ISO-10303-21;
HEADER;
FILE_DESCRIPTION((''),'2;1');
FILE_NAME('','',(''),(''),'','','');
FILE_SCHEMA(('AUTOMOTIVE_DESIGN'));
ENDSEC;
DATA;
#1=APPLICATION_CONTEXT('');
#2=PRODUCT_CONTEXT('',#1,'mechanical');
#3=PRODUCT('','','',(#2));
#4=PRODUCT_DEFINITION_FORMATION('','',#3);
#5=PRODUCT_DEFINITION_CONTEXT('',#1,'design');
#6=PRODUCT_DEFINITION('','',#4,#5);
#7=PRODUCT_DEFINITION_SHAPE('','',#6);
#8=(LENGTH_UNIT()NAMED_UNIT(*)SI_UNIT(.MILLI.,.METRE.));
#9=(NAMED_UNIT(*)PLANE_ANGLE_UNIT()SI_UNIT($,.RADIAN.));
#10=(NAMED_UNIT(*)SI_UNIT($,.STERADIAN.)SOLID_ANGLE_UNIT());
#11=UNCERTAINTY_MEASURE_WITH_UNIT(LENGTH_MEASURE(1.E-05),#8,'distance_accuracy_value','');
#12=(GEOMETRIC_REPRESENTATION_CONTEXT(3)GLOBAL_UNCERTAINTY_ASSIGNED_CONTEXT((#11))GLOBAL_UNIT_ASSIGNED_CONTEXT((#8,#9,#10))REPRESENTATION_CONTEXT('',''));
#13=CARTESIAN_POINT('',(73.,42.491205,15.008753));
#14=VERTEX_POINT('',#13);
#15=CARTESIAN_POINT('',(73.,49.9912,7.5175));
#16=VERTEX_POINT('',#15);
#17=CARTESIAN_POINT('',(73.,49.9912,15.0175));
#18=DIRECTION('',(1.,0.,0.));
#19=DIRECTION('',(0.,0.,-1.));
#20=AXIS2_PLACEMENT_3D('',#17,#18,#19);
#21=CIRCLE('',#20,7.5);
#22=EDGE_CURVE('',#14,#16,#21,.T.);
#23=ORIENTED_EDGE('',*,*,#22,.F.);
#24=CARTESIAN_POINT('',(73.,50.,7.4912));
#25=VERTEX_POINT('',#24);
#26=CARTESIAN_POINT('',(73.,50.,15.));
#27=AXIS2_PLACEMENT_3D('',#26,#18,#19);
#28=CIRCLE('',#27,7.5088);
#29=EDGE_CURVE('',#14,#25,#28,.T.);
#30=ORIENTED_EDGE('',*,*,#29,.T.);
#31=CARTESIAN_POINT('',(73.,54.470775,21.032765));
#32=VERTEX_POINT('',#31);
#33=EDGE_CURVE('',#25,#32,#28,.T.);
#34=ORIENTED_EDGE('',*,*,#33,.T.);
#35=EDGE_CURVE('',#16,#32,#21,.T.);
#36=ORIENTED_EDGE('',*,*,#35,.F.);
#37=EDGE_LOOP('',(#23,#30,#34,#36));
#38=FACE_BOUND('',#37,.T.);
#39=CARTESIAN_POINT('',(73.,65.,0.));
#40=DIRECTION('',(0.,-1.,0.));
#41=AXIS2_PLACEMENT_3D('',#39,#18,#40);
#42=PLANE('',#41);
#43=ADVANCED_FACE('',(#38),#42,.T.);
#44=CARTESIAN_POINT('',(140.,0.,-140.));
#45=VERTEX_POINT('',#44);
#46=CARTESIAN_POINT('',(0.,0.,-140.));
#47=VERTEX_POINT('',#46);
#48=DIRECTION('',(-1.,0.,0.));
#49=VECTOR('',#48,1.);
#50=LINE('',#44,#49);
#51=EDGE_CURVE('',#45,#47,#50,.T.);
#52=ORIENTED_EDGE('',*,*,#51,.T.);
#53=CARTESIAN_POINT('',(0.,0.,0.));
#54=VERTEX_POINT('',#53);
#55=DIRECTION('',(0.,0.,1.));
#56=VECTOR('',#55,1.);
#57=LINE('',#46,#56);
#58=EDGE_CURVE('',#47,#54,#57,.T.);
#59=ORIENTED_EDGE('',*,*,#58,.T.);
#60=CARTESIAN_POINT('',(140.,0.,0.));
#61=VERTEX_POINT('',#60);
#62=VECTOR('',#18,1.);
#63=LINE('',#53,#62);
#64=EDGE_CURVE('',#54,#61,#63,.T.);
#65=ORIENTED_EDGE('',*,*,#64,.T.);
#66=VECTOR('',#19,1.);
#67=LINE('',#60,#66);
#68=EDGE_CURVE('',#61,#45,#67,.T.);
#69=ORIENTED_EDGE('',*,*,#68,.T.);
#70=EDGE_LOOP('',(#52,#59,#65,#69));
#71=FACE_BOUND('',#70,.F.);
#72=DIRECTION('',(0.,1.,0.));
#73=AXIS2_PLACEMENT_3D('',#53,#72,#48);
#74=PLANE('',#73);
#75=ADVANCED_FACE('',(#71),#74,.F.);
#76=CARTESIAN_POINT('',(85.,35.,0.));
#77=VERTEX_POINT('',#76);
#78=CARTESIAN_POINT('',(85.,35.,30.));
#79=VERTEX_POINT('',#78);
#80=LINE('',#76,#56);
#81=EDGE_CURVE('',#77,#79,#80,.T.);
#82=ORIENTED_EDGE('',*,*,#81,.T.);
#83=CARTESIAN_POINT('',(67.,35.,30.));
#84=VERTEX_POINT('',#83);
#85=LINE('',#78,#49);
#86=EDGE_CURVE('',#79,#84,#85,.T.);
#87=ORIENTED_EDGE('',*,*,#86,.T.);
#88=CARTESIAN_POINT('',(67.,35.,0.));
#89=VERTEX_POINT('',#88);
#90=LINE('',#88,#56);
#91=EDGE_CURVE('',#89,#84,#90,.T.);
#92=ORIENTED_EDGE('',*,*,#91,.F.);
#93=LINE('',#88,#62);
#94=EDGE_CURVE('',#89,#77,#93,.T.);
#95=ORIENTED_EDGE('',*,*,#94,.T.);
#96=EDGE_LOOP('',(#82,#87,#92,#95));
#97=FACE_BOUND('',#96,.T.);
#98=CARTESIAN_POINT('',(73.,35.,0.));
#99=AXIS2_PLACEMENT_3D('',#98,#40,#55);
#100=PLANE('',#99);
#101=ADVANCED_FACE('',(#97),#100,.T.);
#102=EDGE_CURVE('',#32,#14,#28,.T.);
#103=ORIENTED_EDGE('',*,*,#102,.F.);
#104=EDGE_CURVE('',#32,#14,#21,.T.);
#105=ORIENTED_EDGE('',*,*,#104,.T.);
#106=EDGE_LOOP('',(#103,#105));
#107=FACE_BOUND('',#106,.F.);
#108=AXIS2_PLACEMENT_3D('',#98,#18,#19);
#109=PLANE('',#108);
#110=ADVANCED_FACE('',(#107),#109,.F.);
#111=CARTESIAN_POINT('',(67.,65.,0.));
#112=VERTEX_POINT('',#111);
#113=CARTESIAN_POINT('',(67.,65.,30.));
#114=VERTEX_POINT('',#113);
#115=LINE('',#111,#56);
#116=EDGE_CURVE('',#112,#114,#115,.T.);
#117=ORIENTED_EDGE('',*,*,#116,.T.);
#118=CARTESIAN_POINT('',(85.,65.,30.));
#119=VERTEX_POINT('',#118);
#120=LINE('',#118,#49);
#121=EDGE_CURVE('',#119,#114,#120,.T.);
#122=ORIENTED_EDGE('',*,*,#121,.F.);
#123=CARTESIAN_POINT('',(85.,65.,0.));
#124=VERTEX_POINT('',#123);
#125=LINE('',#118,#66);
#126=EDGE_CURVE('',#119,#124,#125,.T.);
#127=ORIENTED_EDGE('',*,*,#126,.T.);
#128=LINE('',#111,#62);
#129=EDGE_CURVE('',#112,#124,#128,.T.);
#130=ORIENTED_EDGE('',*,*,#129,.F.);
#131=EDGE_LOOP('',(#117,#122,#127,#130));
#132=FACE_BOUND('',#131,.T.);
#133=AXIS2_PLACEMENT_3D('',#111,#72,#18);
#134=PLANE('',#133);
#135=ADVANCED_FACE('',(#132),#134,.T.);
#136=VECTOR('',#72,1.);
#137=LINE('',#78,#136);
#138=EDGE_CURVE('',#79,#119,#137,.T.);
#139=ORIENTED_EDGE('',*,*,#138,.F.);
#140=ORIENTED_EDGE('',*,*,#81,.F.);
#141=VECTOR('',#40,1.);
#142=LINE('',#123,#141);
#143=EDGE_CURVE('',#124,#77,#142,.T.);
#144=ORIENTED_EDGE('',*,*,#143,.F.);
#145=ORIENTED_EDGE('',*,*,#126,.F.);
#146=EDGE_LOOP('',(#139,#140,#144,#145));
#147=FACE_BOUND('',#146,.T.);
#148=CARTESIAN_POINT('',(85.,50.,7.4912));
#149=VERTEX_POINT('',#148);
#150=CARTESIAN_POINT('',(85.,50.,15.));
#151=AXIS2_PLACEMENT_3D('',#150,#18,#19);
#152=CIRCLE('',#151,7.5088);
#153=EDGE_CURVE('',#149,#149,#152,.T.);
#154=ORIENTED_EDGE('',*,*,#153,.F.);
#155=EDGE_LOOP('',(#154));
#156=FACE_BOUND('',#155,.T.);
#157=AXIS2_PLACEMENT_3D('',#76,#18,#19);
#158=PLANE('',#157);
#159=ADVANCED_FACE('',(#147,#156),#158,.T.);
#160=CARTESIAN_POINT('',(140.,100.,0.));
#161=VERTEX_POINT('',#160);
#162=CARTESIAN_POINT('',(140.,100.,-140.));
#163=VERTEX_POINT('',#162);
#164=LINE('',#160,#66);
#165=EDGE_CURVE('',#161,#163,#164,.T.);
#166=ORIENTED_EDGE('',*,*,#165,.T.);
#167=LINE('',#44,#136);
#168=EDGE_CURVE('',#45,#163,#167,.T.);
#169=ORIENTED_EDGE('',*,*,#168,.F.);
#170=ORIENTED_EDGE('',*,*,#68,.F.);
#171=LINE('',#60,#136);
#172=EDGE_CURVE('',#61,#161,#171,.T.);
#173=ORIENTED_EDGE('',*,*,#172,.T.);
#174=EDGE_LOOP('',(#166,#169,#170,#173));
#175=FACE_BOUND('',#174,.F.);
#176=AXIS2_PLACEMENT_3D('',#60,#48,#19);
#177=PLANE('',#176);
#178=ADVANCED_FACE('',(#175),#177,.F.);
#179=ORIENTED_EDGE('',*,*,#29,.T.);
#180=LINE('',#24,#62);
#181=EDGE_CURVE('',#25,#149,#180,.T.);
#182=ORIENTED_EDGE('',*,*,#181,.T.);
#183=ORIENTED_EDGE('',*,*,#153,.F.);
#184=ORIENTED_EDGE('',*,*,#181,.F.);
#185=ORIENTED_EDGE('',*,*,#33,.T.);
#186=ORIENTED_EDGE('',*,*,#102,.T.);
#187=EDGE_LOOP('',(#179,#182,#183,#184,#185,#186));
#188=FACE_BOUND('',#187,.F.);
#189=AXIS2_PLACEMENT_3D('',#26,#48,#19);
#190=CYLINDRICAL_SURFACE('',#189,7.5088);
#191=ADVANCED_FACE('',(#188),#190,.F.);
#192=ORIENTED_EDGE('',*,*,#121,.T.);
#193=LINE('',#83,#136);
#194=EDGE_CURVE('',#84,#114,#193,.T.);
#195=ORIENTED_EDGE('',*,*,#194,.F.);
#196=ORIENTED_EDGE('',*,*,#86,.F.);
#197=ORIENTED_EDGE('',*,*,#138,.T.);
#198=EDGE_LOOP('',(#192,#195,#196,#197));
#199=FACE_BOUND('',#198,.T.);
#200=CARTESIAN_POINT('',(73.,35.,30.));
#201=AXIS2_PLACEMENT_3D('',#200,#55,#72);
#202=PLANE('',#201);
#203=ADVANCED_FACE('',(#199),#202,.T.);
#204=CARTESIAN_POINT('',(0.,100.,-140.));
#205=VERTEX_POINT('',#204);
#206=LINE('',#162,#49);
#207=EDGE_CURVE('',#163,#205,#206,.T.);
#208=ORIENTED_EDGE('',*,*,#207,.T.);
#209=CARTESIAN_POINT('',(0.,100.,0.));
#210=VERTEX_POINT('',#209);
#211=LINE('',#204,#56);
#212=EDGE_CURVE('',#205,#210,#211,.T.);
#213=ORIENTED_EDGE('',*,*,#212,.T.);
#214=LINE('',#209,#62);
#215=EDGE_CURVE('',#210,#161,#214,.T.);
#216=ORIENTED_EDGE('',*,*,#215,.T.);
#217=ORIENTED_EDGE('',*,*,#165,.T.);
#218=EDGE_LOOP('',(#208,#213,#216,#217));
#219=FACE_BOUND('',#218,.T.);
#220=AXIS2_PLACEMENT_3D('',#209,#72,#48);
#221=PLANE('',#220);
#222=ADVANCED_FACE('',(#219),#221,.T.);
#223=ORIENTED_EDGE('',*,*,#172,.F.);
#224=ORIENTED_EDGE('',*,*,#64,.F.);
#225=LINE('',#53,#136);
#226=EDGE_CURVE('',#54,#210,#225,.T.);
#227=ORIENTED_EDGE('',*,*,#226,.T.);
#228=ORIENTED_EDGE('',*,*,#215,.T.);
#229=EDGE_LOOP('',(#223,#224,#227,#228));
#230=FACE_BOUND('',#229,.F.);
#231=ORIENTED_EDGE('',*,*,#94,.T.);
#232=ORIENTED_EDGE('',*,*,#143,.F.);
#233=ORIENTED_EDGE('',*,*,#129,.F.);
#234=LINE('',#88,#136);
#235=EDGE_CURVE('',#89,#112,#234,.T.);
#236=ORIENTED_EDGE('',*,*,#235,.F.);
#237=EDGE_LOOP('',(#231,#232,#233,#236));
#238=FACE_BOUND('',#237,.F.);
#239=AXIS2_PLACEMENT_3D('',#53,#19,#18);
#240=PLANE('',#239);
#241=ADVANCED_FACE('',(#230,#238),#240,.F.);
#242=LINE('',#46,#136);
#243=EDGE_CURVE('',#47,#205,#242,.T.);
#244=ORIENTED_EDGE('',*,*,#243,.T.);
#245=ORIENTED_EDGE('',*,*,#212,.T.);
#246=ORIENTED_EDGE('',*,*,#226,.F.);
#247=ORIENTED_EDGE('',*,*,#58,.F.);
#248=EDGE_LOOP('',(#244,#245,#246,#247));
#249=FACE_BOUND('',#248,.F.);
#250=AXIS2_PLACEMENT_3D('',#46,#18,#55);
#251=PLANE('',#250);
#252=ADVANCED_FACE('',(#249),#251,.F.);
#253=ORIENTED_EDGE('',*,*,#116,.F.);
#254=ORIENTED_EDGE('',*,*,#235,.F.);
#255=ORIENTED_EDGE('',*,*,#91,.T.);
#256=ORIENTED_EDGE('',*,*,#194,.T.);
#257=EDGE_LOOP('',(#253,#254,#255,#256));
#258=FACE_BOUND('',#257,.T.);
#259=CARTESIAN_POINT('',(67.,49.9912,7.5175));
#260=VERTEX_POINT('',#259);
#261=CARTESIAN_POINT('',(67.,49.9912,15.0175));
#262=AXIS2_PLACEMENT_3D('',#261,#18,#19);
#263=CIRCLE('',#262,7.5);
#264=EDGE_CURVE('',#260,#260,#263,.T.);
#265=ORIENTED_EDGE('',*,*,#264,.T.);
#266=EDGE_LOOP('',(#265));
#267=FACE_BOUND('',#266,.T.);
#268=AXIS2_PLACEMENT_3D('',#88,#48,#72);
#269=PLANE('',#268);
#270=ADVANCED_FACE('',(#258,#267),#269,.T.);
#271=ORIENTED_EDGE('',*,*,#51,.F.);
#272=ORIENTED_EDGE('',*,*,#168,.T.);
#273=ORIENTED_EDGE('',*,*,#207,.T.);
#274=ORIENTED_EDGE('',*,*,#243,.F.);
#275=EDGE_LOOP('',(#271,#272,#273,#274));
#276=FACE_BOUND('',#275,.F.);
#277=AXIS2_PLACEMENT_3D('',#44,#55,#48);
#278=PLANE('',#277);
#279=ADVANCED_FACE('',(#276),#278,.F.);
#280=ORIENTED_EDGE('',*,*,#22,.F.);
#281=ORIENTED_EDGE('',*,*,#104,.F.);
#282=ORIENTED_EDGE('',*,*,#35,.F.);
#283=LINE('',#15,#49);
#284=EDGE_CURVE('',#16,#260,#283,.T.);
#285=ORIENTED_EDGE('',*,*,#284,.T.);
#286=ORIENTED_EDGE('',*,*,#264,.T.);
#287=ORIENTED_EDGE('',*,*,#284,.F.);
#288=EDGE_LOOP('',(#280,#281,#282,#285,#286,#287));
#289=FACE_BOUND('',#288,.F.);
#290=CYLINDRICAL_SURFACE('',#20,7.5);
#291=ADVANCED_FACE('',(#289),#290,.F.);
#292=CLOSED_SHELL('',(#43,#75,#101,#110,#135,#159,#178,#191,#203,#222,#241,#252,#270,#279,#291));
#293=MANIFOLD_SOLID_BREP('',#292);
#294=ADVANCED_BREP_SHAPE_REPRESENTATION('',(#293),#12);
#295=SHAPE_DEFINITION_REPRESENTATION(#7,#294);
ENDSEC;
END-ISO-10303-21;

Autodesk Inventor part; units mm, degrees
ref_plane "YZ Plane" through (0, 0, 0) normal (1, 0, 0) x (0, 1, 0)
ref_plane "XZ Plane" through (0, 0, 0) normal (0, 1, 0) x (-1, 0, 0)
ref_plane "XY Plane" through (0, 0, 0) normal (0, 0, 1) x (1, 0, 0)
sketch "Sketch1" plane through (0, 0, 0) normal (1, 0, 0) x (0, 1, 0)
  point P0 (0, 0)
sketch "Sketch2" plane through (0, 0, 0) normal (0, 1, 0) x (-1, 0, 0)
  line L0 (0, 0) -> (-140, 0)
  line L1 (-140, 0) -> (-140, -140)
  line L2 (-140, -140) -> (0, -140)
  line L3 (0, -140) -> (0, 0)
  dimension "d0" = 140
  dimension "d1" = 140
extrude "Extrusion1" add sketch "Sketch2" along normal blind 100
sketch "Sketch3" plane through (0, 0, 0) normal (0, 0, 1) x (1, 0, 0)
  line L0 (140, 100) -> (0, 100) projected
  line L1 (140, 0) -> (140, 100) projected
  line L2 (140, 0) -> (0, 0) projected
  line L3 (70, 35) -> (73, 35)
  line L4 (73, 35) -> (67, 35)
  line L5 (67, 35) -> (67, 65)
  line L6 (67, 65) -> (73, 65)
  line L7 (73, 65) -> (73, 35)
extrude "Extrusion2" add sketch "Sketch3" along normal blind 30
sketch "Sketch4" plane through (73, 35, 0) normal (1, 0, 0) x (0, 0, -1)
  line L0 (0, -35) -> (0, 65) projected
  circle A0 centre (-15.0175, 14.9912) radius 7.5
  point P0 (-30, 30)
  dimension "d10" = 15
extrude "Extrusion3" cut sketch "Sketch4" against normal blind 30
sketch "Sketch5" plane through (73, 35, 0) normal (1, 0, 0) x (0, 0, -1)
  line L0 (0, 30) -> (0, 0) projected
  line L1 (-30, 30) -> (0, 30)
  line L2 (0, 30) -> (0, 0)
  line L3 (0, 0) -> (-30, 0)
  line L4 (-30, 0) -> (-30, 30)
  circle A0 centre (-15, 15) radius 7.5088
  point P0 (0, -35)
extrude "Extrusion4" add sketch "Sketch5" along normal blind 12
equation "\"BendRadius\" = Thickness"
equation "\"BendReliefWidth\" = Thickness"
equation "\"BendReliefDepth\" = 0.5 * Thickness"
equation "\"CornerReliefSize\" = 4 * Thickness"
equation "\"MinimumRemnant\" = 2 * Thickness"
equation "\"TransitionRadius\" = BendRadius"
equation "\"JacobiRadiusSize\" = BendRadius"
equation "\"GapSize\" = Thickness"
equation "\"Thickness\" = 0.5"
properties part number "Balancin"
